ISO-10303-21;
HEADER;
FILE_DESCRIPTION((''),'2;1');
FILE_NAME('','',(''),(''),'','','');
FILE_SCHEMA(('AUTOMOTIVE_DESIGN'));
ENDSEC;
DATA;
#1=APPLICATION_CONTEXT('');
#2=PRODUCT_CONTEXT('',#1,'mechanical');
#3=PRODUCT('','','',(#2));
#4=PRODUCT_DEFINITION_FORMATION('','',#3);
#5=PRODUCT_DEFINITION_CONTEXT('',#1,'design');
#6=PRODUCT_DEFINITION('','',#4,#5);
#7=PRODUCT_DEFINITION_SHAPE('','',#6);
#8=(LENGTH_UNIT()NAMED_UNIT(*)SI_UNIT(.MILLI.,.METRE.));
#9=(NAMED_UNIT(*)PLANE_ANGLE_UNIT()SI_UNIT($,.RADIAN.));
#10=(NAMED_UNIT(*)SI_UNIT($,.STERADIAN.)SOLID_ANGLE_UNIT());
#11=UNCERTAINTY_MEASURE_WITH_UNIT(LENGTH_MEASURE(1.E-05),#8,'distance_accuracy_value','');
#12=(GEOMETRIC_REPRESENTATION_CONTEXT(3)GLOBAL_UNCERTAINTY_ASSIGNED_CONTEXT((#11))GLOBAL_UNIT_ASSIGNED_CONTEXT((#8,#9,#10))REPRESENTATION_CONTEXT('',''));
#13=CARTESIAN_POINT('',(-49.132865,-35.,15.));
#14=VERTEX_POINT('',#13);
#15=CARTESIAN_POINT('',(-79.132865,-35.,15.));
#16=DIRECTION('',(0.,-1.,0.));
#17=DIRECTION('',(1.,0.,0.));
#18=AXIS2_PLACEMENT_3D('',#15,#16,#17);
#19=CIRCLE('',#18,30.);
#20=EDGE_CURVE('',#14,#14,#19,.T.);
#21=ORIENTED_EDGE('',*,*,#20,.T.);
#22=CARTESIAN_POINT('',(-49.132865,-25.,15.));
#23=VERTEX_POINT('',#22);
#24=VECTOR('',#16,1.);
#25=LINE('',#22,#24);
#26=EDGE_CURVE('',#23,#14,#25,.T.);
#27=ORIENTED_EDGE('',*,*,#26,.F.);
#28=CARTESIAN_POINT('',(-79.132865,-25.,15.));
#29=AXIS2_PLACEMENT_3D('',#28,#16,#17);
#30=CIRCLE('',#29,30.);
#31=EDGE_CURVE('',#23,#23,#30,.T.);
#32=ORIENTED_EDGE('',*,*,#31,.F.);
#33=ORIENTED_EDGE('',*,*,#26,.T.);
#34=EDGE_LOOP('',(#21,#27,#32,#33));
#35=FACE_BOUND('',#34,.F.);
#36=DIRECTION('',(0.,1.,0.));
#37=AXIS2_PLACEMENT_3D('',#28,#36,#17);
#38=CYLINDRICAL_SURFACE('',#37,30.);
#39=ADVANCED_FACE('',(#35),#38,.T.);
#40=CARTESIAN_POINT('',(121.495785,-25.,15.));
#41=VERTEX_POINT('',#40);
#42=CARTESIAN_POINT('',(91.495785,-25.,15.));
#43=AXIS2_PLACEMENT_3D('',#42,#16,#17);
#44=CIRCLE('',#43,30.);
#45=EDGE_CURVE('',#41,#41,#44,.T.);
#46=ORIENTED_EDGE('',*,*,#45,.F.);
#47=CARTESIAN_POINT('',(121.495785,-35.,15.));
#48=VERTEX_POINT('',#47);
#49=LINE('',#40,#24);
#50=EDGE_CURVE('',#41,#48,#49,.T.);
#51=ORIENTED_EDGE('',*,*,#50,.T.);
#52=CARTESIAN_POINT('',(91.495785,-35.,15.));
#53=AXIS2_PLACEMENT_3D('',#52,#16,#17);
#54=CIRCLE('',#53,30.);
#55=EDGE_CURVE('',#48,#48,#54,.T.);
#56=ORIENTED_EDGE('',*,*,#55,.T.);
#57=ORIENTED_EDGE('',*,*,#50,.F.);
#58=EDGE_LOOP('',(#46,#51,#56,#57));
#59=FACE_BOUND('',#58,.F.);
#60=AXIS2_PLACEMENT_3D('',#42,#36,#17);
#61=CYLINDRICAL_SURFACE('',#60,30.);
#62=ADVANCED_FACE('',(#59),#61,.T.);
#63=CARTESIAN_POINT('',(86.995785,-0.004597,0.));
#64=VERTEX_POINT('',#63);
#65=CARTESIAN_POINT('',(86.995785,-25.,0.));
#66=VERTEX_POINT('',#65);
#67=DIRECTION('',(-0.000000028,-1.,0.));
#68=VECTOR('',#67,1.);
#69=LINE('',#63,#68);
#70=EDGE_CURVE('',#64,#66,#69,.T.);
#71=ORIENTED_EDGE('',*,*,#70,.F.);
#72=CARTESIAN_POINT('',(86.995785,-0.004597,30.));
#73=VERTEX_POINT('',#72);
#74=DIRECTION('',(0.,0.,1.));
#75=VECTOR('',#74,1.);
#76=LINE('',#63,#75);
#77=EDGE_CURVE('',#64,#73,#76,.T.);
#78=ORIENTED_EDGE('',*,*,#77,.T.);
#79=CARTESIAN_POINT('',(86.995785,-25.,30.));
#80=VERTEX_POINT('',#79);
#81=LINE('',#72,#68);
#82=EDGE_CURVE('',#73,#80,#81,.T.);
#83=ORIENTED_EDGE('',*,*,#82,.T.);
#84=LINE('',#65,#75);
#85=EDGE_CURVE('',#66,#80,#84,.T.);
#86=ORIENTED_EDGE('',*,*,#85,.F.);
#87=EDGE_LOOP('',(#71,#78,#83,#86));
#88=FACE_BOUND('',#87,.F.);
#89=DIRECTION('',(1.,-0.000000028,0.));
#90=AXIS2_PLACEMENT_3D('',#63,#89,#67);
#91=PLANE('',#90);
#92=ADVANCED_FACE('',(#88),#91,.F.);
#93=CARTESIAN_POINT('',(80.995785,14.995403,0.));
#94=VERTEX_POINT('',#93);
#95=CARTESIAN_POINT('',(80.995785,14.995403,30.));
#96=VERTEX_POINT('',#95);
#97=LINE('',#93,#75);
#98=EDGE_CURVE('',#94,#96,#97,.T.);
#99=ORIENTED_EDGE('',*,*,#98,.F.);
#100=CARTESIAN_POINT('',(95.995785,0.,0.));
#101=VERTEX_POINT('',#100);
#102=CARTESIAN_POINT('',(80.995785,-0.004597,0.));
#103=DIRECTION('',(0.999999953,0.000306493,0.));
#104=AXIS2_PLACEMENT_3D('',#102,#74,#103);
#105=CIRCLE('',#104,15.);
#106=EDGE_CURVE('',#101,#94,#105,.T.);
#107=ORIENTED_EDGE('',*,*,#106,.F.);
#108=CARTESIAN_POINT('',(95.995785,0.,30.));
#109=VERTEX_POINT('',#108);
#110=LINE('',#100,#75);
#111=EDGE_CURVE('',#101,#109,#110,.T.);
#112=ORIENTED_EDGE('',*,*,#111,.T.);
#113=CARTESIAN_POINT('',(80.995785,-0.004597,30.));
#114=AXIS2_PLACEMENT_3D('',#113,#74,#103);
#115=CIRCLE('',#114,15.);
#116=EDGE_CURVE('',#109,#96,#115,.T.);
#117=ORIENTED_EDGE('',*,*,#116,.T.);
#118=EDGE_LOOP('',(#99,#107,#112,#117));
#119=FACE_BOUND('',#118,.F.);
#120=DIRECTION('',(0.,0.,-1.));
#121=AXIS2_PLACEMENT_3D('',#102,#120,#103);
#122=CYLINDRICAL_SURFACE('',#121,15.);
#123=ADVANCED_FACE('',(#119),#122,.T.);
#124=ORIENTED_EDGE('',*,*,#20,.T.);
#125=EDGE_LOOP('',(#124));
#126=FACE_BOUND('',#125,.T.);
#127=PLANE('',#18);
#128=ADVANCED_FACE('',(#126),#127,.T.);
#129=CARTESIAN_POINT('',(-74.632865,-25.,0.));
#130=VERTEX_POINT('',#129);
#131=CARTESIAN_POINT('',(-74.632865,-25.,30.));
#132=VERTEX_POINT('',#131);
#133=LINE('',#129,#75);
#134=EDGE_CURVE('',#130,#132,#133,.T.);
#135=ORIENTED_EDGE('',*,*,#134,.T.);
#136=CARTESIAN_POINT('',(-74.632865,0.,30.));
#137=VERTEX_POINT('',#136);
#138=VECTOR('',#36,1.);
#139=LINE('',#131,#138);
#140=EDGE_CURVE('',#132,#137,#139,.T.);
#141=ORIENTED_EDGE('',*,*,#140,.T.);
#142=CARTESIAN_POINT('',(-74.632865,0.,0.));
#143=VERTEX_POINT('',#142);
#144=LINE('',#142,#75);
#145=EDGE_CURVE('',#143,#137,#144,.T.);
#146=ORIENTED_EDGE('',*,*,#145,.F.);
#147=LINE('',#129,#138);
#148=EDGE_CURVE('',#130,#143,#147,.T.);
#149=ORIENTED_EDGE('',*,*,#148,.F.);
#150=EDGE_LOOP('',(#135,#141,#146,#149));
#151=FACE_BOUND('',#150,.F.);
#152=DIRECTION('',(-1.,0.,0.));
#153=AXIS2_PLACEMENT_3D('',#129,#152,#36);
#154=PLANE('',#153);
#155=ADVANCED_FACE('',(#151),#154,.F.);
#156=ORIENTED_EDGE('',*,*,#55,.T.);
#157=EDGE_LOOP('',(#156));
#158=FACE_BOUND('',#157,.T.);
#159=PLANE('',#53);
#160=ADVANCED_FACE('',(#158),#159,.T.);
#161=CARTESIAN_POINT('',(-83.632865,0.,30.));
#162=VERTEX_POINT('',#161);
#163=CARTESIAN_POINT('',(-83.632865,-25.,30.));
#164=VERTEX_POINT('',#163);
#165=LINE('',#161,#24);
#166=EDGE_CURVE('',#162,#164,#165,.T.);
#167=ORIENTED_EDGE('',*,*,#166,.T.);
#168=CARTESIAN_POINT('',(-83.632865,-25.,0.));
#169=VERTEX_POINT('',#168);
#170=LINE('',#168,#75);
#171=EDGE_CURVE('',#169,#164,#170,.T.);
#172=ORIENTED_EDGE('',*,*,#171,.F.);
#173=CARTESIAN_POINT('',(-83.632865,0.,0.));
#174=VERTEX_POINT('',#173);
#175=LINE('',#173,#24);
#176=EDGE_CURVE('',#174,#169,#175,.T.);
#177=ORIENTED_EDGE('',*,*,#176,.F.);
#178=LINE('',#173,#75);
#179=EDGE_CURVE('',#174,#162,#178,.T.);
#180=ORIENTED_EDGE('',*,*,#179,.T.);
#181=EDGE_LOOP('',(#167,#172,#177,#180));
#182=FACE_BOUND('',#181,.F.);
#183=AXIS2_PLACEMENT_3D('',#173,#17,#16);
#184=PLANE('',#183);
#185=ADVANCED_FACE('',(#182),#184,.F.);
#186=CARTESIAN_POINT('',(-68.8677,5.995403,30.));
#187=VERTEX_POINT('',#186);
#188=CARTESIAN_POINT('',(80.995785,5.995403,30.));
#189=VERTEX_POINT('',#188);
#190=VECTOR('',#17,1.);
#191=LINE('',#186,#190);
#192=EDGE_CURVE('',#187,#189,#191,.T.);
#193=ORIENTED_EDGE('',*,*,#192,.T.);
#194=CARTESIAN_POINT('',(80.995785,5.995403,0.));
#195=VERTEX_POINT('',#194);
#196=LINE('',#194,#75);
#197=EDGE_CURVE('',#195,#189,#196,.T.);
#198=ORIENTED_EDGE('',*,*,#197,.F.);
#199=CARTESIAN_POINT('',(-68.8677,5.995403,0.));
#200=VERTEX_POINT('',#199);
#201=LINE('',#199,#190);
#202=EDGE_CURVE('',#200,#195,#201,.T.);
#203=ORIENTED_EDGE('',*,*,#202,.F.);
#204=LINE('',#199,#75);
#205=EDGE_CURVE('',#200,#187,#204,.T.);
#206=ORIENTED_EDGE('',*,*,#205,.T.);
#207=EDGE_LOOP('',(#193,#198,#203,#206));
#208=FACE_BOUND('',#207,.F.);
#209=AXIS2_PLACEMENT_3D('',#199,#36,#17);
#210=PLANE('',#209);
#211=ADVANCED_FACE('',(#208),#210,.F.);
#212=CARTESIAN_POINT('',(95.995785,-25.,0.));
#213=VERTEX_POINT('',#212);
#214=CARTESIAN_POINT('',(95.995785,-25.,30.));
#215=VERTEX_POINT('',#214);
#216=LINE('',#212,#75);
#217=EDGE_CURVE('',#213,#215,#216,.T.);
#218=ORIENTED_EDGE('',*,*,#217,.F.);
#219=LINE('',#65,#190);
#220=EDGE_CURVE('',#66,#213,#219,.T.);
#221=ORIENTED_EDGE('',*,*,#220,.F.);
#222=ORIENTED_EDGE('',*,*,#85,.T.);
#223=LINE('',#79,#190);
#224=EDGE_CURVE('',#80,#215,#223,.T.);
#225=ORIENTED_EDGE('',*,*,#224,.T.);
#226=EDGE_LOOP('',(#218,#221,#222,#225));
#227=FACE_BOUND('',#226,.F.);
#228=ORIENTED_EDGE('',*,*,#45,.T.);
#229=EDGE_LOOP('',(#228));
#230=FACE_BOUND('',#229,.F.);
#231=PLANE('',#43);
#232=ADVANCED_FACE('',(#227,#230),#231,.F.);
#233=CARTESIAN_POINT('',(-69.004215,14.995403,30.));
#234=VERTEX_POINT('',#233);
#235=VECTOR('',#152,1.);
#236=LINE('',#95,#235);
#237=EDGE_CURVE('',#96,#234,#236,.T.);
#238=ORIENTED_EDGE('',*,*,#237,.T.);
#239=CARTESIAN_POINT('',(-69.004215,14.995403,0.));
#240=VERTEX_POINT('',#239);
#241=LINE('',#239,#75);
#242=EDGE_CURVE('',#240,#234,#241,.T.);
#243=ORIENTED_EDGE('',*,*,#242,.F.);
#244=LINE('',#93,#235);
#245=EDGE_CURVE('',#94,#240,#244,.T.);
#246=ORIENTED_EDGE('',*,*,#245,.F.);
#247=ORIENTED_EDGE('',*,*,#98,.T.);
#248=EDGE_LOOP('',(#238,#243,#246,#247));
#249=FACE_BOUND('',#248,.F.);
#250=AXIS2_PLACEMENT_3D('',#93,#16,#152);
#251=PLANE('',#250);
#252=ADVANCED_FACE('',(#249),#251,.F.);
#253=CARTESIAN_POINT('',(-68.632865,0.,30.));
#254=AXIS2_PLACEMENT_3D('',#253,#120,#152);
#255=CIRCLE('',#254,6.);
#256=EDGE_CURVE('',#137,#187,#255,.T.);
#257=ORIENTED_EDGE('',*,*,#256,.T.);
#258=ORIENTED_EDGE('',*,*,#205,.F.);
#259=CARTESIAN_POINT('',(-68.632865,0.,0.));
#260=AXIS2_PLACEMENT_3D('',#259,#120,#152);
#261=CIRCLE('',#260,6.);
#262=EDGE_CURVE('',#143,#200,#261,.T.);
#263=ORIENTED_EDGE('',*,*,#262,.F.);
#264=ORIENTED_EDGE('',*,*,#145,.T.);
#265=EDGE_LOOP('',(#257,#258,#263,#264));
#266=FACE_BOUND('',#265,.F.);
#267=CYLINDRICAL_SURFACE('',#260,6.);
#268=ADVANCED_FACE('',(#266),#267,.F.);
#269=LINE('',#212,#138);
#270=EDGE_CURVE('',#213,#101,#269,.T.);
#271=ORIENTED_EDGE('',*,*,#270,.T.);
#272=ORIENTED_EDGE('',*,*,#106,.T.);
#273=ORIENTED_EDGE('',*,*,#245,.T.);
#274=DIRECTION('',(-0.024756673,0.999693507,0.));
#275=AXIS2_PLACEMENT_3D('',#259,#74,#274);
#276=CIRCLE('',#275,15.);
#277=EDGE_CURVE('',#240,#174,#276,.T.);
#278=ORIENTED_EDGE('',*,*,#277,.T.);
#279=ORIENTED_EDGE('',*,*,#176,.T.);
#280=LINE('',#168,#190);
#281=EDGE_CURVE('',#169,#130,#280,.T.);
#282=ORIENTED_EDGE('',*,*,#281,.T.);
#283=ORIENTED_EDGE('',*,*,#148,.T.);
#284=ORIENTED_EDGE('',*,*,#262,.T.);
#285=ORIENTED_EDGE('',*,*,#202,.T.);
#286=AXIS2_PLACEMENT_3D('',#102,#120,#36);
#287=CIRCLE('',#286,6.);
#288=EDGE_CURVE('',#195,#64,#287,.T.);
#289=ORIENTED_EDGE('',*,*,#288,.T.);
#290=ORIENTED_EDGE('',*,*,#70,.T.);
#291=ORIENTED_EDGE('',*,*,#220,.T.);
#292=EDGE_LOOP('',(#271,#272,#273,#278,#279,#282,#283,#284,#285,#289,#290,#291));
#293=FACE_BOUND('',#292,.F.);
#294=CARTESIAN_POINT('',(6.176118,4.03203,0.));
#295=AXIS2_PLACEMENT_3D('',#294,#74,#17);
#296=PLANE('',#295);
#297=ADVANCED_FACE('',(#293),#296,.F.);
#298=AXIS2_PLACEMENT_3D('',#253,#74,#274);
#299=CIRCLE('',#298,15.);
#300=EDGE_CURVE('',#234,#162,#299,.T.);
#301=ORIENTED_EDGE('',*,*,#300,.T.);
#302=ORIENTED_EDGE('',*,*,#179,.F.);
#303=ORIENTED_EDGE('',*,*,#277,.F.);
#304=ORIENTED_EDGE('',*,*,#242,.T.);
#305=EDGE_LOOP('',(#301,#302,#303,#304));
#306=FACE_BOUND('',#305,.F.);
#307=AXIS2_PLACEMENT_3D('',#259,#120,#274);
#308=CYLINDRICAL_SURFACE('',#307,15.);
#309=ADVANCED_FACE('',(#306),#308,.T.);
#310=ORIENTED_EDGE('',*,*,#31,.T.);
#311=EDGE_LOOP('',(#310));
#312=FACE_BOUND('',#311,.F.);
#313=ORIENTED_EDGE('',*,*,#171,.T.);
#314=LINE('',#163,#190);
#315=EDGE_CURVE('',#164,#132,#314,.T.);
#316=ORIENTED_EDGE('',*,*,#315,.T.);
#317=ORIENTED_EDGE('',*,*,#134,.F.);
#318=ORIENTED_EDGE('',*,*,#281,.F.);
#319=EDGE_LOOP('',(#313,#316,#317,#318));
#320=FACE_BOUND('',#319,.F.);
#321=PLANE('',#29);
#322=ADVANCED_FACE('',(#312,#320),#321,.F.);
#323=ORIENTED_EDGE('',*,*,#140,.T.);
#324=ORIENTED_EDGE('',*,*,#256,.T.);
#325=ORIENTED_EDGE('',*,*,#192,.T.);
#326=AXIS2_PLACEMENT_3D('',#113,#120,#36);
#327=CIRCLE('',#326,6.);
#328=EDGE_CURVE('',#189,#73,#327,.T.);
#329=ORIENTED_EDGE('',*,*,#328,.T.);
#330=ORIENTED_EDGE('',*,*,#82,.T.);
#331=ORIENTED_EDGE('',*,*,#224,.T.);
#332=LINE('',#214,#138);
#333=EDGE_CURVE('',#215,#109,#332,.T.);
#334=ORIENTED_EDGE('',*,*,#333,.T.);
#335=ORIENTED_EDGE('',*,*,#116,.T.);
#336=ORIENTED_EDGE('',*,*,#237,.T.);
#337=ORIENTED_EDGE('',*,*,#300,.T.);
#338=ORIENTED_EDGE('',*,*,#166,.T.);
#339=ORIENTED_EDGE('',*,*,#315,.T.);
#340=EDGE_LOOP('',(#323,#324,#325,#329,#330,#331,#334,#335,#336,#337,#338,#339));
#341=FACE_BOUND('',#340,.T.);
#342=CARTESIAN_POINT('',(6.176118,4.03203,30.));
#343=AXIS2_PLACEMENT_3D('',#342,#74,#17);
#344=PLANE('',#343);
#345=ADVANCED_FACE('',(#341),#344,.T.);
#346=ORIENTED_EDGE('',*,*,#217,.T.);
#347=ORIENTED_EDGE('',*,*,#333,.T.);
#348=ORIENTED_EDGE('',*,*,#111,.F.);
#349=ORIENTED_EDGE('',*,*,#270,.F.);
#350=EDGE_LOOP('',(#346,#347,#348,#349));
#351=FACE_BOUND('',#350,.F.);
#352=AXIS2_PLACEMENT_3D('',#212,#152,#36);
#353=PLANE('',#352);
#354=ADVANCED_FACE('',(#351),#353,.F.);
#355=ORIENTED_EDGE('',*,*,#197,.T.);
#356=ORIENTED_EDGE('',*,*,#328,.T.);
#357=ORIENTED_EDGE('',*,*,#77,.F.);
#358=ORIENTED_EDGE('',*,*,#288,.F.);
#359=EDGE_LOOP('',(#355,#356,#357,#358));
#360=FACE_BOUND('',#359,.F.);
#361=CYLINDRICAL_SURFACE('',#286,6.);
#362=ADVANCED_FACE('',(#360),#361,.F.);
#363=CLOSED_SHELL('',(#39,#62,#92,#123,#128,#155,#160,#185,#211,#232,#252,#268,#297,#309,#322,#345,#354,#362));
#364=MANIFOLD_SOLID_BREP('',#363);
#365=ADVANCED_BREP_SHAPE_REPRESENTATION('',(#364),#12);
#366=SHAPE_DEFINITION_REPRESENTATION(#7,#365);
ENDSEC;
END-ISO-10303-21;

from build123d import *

# Parameters (mm, degrees)
F1_DEPTH = 30
F2_R     = 30
F3_DEPTH = 10
F4_R     = 30
F5_DEPTH = 10


# Not quite as in the source:
# - ends of sketch curves that miss each other by under 0.0002 mm in the source are joined


with BuildPart() as f1:
    # F0 (on Top) → F1 (new body)
    with BuildSketch(Plane.XY):
        with BuildLine():
            Line((-83.6328645892, 0), (-83.6328645892, -25))
            Line((-83.6328645892, -25), (-74.6328645685, -25))
            Line((-74.6328645685, -25), (-74.6328645685, 0))
            ThreePointArc((-74.6328645685, 0), (-72.9577352395, 4.1587851122), (-68.8677000121, 5.9954025783))
            Line((-68.8677000121, 5.9954025783), (80.9957853142, 5.9954025783))
            ThreePointArc((80.9957853142, 5.9954025783), (85.2384259867, 4.2380432715), (86.9957852935, -0.004597401))
            Line((86.9957852935, -0.004597401), (86.9957845889, -25))
            Line((86.9957845889, -25), (95.9957846097, -25))
            Line((95.9957846097, -25), (95.9957846097, 0))
            ThreePointArc((95.9957846097, 0), (91.6007614807, 10.603629619), (80.9957853142, 14.995402599))
            Line((80.9957853142, 14.995402599), (-69.0042146858, 14.995402599))
            ThreePointArc((-69.0042146858, 14.995402599), (-79.3699557095, 10.4744868264), (-83.6328645892, 0))
        make_face()
    extrude(amount=F1_DEPTH)

    # F2 (on face) → F3 (join)
    with BuildSketch(Plane.XZ.offset(25)):
        with Locations((-79.1328645789, 15)):
            Circle(F2_R)
    extrude(amount=F3_DEPTH)

    # F4 (on face) → F5 (join)
    with BuildSketch(Plane.XZ.offset(25)):
        with Locations((91.4957845993, 15)):
            Circle(F4_R)
    extrude(amount=F5_DEPTH)


solid = f1.part
